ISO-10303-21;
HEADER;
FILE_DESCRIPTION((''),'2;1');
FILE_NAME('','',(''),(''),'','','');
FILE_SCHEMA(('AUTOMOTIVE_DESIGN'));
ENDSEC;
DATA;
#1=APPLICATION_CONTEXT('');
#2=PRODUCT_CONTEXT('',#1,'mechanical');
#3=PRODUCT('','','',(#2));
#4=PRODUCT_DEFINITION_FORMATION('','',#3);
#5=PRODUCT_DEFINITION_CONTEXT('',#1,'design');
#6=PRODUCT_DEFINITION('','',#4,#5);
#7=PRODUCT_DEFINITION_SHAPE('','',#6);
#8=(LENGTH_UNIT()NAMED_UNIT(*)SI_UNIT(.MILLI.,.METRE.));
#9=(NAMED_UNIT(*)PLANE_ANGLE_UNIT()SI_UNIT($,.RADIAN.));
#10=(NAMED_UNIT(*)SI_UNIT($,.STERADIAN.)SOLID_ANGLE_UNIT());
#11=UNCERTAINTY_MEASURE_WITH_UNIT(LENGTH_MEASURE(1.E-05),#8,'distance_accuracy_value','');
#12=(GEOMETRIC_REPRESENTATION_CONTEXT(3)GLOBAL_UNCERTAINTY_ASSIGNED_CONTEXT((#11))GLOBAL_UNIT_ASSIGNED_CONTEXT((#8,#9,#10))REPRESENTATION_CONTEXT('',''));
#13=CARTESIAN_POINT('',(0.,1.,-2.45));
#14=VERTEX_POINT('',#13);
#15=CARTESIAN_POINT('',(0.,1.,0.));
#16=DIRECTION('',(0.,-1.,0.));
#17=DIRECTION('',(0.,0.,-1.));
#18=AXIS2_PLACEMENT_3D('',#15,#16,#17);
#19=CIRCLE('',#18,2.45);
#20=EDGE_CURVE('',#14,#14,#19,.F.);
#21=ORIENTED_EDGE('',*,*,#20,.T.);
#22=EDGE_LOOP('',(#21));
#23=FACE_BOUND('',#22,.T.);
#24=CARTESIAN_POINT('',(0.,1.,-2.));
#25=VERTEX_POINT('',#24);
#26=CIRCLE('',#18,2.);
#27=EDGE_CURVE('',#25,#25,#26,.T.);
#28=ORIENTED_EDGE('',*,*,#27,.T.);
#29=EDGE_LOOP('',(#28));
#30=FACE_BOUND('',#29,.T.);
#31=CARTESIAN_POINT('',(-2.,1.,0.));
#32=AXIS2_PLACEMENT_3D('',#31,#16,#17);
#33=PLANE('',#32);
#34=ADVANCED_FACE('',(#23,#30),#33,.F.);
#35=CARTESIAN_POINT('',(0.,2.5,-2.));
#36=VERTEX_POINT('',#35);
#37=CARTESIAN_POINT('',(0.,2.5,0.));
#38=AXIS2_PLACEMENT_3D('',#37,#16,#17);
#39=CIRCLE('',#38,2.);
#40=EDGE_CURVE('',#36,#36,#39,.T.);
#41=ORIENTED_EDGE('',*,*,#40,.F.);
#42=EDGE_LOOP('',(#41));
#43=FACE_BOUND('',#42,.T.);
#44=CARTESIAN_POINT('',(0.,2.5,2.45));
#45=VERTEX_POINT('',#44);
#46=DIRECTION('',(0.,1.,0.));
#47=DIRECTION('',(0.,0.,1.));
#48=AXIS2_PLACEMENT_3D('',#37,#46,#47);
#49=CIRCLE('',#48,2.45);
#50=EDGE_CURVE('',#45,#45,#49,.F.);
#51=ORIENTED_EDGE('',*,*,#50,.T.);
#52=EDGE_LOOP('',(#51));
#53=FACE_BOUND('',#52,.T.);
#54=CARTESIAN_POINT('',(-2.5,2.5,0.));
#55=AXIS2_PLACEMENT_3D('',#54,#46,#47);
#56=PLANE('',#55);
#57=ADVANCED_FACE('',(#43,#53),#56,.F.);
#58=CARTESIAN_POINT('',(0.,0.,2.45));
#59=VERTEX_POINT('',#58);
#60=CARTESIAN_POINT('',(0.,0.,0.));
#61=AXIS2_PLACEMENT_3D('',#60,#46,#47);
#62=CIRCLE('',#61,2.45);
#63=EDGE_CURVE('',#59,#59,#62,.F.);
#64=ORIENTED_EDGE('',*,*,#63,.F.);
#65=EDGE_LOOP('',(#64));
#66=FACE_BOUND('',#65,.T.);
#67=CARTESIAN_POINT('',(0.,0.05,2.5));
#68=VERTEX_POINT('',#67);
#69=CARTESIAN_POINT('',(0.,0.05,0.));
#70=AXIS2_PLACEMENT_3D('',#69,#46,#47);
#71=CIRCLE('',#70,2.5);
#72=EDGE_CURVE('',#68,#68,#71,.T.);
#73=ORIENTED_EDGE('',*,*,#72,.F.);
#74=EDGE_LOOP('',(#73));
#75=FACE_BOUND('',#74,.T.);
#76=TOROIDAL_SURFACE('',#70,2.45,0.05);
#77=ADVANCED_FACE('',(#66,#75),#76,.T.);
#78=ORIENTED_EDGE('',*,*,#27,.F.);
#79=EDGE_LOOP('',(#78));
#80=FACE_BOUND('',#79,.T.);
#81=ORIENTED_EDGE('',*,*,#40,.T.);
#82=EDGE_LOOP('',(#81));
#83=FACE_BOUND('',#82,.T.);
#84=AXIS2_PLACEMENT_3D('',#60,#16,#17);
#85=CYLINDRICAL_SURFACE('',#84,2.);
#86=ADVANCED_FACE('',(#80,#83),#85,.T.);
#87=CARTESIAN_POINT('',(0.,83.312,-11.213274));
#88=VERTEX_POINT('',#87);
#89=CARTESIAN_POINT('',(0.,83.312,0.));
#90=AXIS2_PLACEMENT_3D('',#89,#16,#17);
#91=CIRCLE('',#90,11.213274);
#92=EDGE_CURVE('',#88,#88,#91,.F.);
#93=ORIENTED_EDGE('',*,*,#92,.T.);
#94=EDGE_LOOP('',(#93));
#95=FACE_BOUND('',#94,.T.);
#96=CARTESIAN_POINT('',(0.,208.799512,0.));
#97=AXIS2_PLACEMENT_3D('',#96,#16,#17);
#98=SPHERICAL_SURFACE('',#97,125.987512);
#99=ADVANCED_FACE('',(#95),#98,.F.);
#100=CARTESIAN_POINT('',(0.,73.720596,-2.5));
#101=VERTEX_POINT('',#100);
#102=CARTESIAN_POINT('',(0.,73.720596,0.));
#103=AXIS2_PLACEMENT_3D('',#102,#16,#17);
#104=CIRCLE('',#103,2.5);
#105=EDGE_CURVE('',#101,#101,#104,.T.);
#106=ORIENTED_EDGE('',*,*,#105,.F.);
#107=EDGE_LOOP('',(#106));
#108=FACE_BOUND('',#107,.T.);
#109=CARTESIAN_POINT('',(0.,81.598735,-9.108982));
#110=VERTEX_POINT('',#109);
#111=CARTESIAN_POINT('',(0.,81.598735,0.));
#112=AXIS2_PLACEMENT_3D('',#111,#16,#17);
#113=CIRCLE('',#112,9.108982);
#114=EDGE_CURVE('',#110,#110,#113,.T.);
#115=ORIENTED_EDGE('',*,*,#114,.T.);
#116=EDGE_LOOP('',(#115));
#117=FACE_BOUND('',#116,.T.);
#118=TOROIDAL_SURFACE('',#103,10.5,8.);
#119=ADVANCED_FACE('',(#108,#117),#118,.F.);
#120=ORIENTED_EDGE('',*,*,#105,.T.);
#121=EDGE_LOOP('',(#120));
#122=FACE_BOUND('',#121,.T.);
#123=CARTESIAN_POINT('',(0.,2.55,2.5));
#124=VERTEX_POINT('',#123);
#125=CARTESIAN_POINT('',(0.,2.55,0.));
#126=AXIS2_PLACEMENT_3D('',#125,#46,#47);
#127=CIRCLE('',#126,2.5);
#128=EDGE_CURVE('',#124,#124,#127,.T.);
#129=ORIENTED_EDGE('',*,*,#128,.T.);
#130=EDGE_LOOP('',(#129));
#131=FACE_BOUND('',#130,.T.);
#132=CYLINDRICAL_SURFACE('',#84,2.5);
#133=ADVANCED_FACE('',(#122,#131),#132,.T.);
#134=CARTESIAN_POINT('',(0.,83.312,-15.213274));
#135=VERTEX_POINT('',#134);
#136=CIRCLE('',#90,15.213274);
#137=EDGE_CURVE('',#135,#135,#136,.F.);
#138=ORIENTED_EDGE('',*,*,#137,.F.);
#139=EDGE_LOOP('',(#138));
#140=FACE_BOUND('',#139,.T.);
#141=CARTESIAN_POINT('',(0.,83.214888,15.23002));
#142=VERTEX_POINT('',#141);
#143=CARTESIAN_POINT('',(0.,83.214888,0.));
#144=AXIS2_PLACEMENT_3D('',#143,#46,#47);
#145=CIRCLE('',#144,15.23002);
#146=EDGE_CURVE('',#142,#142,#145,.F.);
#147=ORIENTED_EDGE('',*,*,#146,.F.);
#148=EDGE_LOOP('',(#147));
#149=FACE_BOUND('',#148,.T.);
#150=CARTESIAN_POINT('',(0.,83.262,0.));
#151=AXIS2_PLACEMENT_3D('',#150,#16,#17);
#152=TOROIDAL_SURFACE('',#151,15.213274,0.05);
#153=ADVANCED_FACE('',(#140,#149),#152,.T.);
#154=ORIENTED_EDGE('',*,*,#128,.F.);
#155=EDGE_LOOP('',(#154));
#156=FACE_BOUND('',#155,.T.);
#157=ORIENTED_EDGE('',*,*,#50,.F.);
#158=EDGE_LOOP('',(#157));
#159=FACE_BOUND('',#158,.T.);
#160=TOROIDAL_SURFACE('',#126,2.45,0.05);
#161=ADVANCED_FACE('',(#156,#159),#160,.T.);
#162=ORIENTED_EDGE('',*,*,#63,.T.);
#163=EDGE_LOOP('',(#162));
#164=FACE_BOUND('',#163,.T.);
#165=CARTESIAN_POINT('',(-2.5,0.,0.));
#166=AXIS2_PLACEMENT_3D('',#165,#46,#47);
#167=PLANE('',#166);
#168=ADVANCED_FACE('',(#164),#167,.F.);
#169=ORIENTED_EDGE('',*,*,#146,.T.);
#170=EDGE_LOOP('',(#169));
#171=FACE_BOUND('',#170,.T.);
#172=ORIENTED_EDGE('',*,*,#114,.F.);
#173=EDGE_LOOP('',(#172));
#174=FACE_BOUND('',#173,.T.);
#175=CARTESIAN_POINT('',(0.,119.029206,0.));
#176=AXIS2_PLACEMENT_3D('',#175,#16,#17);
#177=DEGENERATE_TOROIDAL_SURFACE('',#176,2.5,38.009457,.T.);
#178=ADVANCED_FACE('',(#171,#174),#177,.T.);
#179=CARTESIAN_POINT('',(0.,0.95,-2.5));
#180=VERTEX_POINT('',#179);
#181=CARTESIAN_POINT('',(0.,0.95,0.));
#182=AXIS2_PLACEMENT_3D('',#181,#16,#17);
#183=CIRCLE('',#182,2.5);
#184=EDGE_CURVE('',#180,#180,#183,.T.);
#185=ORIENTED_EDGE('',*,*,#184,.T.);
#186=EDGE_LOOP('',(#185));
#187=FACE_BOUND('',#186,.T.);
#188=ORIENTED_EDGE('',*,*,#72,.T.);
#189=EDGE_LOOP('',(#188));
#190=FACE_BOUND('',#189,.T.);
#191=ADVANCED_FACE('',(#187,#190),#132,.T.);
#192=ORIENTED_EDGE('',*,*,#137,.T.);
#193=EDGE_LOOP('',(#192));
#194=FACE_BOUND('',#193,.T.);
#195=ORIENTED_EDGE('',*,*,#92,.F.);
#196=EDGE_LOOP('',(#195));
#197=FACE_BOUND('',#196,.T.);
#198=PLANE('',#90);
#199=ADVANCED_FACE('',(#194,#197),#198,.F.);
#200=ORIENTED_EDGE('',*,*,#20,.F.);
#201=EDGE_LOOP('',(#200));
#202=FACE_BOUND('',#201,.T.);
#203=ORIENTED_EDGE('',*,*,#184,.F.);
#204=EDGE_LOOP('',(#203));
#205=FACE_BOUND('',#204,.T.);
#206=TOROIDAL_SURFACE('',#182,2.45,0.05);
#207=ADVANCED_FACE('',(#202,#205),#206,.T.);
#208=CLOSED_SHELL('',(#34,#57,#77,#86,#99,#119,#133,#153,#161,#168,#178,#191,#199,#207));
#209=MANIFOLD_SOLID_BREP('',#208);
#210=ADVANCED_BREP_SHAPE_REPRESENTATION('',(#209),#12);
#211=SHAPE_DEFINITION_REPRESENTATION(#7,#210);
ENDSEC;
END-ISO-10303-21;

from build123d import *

# Parameters (mm, degrees)
FILLET1_R = 0.05


# Read off the part's stored shape, not the designer's step: Dome1
with BuildPart() as part:
    # Sketch1 → Revolve1 (revolve)
    with BuildSketch(Plane.XY, mode=Mode.PRIVATE) as revolve1_sk:
        with BuildLine():
            Line((0, 0), (0, 83.312))
            Line((0, 83.312), (-15.5, 83.312))
            ThreePointArc((-15.5, 83.312), (-12.341842281, 82.316034739), (-9.108981634, 81.598734928))
            ThreePointArc((-9.108981634, 81.598734928), (-4.371046299, 78.862184261), (-2.5, 73.720596322))
            Line((-2.5, 73.720596322), (-2.5, 2.5))
            Line((-2.5, 2.5), (-2, 2.5))
            Line((-2, 2.5), (-2, 1))
            Line((-2, 1), (-2.5, 1))
            Line((-2.5, 1), (-2.5, 0))
            Line((-2.5, 0), (0, 0))
        make_face()
    revolve(revolve1_sk.sketch.rotate(Axis((0, 0, 0), (0, 1, 0)), 270), axis=Axis((0, 0, 0), (0, 1, 0)))

    # Fillet1
    fillet1_edges = [part.edges().sort_by_distance(p)[0] for p in [
        (0, 83.312, 15.5),
        (0, 0, 2.5),
        (0, 1, 2.5),
        (0, 2.5, 2.5),
    ]]
    fillet(fillet1_edges, radius=FILLET1_R)

    # Dome1 outline → Dome1 (revolve, cut)
    with BuildSketch(Plane.XY):
        with BuildLine():
            Line((0, 83.312000011), (0, 82.812))
            ThreePointArc((0, 82.812), (5.612208004, 82.937062075), (11.21327404, 83.312000011))
            Line((11.21327404, 83.312000011), (0, 83.312000011))
        make_face()
    revolve(axis=Axis((0, 0, 0), (0, 1, 0)), mode=Mode.SUBTRACT)


solid = part.part
